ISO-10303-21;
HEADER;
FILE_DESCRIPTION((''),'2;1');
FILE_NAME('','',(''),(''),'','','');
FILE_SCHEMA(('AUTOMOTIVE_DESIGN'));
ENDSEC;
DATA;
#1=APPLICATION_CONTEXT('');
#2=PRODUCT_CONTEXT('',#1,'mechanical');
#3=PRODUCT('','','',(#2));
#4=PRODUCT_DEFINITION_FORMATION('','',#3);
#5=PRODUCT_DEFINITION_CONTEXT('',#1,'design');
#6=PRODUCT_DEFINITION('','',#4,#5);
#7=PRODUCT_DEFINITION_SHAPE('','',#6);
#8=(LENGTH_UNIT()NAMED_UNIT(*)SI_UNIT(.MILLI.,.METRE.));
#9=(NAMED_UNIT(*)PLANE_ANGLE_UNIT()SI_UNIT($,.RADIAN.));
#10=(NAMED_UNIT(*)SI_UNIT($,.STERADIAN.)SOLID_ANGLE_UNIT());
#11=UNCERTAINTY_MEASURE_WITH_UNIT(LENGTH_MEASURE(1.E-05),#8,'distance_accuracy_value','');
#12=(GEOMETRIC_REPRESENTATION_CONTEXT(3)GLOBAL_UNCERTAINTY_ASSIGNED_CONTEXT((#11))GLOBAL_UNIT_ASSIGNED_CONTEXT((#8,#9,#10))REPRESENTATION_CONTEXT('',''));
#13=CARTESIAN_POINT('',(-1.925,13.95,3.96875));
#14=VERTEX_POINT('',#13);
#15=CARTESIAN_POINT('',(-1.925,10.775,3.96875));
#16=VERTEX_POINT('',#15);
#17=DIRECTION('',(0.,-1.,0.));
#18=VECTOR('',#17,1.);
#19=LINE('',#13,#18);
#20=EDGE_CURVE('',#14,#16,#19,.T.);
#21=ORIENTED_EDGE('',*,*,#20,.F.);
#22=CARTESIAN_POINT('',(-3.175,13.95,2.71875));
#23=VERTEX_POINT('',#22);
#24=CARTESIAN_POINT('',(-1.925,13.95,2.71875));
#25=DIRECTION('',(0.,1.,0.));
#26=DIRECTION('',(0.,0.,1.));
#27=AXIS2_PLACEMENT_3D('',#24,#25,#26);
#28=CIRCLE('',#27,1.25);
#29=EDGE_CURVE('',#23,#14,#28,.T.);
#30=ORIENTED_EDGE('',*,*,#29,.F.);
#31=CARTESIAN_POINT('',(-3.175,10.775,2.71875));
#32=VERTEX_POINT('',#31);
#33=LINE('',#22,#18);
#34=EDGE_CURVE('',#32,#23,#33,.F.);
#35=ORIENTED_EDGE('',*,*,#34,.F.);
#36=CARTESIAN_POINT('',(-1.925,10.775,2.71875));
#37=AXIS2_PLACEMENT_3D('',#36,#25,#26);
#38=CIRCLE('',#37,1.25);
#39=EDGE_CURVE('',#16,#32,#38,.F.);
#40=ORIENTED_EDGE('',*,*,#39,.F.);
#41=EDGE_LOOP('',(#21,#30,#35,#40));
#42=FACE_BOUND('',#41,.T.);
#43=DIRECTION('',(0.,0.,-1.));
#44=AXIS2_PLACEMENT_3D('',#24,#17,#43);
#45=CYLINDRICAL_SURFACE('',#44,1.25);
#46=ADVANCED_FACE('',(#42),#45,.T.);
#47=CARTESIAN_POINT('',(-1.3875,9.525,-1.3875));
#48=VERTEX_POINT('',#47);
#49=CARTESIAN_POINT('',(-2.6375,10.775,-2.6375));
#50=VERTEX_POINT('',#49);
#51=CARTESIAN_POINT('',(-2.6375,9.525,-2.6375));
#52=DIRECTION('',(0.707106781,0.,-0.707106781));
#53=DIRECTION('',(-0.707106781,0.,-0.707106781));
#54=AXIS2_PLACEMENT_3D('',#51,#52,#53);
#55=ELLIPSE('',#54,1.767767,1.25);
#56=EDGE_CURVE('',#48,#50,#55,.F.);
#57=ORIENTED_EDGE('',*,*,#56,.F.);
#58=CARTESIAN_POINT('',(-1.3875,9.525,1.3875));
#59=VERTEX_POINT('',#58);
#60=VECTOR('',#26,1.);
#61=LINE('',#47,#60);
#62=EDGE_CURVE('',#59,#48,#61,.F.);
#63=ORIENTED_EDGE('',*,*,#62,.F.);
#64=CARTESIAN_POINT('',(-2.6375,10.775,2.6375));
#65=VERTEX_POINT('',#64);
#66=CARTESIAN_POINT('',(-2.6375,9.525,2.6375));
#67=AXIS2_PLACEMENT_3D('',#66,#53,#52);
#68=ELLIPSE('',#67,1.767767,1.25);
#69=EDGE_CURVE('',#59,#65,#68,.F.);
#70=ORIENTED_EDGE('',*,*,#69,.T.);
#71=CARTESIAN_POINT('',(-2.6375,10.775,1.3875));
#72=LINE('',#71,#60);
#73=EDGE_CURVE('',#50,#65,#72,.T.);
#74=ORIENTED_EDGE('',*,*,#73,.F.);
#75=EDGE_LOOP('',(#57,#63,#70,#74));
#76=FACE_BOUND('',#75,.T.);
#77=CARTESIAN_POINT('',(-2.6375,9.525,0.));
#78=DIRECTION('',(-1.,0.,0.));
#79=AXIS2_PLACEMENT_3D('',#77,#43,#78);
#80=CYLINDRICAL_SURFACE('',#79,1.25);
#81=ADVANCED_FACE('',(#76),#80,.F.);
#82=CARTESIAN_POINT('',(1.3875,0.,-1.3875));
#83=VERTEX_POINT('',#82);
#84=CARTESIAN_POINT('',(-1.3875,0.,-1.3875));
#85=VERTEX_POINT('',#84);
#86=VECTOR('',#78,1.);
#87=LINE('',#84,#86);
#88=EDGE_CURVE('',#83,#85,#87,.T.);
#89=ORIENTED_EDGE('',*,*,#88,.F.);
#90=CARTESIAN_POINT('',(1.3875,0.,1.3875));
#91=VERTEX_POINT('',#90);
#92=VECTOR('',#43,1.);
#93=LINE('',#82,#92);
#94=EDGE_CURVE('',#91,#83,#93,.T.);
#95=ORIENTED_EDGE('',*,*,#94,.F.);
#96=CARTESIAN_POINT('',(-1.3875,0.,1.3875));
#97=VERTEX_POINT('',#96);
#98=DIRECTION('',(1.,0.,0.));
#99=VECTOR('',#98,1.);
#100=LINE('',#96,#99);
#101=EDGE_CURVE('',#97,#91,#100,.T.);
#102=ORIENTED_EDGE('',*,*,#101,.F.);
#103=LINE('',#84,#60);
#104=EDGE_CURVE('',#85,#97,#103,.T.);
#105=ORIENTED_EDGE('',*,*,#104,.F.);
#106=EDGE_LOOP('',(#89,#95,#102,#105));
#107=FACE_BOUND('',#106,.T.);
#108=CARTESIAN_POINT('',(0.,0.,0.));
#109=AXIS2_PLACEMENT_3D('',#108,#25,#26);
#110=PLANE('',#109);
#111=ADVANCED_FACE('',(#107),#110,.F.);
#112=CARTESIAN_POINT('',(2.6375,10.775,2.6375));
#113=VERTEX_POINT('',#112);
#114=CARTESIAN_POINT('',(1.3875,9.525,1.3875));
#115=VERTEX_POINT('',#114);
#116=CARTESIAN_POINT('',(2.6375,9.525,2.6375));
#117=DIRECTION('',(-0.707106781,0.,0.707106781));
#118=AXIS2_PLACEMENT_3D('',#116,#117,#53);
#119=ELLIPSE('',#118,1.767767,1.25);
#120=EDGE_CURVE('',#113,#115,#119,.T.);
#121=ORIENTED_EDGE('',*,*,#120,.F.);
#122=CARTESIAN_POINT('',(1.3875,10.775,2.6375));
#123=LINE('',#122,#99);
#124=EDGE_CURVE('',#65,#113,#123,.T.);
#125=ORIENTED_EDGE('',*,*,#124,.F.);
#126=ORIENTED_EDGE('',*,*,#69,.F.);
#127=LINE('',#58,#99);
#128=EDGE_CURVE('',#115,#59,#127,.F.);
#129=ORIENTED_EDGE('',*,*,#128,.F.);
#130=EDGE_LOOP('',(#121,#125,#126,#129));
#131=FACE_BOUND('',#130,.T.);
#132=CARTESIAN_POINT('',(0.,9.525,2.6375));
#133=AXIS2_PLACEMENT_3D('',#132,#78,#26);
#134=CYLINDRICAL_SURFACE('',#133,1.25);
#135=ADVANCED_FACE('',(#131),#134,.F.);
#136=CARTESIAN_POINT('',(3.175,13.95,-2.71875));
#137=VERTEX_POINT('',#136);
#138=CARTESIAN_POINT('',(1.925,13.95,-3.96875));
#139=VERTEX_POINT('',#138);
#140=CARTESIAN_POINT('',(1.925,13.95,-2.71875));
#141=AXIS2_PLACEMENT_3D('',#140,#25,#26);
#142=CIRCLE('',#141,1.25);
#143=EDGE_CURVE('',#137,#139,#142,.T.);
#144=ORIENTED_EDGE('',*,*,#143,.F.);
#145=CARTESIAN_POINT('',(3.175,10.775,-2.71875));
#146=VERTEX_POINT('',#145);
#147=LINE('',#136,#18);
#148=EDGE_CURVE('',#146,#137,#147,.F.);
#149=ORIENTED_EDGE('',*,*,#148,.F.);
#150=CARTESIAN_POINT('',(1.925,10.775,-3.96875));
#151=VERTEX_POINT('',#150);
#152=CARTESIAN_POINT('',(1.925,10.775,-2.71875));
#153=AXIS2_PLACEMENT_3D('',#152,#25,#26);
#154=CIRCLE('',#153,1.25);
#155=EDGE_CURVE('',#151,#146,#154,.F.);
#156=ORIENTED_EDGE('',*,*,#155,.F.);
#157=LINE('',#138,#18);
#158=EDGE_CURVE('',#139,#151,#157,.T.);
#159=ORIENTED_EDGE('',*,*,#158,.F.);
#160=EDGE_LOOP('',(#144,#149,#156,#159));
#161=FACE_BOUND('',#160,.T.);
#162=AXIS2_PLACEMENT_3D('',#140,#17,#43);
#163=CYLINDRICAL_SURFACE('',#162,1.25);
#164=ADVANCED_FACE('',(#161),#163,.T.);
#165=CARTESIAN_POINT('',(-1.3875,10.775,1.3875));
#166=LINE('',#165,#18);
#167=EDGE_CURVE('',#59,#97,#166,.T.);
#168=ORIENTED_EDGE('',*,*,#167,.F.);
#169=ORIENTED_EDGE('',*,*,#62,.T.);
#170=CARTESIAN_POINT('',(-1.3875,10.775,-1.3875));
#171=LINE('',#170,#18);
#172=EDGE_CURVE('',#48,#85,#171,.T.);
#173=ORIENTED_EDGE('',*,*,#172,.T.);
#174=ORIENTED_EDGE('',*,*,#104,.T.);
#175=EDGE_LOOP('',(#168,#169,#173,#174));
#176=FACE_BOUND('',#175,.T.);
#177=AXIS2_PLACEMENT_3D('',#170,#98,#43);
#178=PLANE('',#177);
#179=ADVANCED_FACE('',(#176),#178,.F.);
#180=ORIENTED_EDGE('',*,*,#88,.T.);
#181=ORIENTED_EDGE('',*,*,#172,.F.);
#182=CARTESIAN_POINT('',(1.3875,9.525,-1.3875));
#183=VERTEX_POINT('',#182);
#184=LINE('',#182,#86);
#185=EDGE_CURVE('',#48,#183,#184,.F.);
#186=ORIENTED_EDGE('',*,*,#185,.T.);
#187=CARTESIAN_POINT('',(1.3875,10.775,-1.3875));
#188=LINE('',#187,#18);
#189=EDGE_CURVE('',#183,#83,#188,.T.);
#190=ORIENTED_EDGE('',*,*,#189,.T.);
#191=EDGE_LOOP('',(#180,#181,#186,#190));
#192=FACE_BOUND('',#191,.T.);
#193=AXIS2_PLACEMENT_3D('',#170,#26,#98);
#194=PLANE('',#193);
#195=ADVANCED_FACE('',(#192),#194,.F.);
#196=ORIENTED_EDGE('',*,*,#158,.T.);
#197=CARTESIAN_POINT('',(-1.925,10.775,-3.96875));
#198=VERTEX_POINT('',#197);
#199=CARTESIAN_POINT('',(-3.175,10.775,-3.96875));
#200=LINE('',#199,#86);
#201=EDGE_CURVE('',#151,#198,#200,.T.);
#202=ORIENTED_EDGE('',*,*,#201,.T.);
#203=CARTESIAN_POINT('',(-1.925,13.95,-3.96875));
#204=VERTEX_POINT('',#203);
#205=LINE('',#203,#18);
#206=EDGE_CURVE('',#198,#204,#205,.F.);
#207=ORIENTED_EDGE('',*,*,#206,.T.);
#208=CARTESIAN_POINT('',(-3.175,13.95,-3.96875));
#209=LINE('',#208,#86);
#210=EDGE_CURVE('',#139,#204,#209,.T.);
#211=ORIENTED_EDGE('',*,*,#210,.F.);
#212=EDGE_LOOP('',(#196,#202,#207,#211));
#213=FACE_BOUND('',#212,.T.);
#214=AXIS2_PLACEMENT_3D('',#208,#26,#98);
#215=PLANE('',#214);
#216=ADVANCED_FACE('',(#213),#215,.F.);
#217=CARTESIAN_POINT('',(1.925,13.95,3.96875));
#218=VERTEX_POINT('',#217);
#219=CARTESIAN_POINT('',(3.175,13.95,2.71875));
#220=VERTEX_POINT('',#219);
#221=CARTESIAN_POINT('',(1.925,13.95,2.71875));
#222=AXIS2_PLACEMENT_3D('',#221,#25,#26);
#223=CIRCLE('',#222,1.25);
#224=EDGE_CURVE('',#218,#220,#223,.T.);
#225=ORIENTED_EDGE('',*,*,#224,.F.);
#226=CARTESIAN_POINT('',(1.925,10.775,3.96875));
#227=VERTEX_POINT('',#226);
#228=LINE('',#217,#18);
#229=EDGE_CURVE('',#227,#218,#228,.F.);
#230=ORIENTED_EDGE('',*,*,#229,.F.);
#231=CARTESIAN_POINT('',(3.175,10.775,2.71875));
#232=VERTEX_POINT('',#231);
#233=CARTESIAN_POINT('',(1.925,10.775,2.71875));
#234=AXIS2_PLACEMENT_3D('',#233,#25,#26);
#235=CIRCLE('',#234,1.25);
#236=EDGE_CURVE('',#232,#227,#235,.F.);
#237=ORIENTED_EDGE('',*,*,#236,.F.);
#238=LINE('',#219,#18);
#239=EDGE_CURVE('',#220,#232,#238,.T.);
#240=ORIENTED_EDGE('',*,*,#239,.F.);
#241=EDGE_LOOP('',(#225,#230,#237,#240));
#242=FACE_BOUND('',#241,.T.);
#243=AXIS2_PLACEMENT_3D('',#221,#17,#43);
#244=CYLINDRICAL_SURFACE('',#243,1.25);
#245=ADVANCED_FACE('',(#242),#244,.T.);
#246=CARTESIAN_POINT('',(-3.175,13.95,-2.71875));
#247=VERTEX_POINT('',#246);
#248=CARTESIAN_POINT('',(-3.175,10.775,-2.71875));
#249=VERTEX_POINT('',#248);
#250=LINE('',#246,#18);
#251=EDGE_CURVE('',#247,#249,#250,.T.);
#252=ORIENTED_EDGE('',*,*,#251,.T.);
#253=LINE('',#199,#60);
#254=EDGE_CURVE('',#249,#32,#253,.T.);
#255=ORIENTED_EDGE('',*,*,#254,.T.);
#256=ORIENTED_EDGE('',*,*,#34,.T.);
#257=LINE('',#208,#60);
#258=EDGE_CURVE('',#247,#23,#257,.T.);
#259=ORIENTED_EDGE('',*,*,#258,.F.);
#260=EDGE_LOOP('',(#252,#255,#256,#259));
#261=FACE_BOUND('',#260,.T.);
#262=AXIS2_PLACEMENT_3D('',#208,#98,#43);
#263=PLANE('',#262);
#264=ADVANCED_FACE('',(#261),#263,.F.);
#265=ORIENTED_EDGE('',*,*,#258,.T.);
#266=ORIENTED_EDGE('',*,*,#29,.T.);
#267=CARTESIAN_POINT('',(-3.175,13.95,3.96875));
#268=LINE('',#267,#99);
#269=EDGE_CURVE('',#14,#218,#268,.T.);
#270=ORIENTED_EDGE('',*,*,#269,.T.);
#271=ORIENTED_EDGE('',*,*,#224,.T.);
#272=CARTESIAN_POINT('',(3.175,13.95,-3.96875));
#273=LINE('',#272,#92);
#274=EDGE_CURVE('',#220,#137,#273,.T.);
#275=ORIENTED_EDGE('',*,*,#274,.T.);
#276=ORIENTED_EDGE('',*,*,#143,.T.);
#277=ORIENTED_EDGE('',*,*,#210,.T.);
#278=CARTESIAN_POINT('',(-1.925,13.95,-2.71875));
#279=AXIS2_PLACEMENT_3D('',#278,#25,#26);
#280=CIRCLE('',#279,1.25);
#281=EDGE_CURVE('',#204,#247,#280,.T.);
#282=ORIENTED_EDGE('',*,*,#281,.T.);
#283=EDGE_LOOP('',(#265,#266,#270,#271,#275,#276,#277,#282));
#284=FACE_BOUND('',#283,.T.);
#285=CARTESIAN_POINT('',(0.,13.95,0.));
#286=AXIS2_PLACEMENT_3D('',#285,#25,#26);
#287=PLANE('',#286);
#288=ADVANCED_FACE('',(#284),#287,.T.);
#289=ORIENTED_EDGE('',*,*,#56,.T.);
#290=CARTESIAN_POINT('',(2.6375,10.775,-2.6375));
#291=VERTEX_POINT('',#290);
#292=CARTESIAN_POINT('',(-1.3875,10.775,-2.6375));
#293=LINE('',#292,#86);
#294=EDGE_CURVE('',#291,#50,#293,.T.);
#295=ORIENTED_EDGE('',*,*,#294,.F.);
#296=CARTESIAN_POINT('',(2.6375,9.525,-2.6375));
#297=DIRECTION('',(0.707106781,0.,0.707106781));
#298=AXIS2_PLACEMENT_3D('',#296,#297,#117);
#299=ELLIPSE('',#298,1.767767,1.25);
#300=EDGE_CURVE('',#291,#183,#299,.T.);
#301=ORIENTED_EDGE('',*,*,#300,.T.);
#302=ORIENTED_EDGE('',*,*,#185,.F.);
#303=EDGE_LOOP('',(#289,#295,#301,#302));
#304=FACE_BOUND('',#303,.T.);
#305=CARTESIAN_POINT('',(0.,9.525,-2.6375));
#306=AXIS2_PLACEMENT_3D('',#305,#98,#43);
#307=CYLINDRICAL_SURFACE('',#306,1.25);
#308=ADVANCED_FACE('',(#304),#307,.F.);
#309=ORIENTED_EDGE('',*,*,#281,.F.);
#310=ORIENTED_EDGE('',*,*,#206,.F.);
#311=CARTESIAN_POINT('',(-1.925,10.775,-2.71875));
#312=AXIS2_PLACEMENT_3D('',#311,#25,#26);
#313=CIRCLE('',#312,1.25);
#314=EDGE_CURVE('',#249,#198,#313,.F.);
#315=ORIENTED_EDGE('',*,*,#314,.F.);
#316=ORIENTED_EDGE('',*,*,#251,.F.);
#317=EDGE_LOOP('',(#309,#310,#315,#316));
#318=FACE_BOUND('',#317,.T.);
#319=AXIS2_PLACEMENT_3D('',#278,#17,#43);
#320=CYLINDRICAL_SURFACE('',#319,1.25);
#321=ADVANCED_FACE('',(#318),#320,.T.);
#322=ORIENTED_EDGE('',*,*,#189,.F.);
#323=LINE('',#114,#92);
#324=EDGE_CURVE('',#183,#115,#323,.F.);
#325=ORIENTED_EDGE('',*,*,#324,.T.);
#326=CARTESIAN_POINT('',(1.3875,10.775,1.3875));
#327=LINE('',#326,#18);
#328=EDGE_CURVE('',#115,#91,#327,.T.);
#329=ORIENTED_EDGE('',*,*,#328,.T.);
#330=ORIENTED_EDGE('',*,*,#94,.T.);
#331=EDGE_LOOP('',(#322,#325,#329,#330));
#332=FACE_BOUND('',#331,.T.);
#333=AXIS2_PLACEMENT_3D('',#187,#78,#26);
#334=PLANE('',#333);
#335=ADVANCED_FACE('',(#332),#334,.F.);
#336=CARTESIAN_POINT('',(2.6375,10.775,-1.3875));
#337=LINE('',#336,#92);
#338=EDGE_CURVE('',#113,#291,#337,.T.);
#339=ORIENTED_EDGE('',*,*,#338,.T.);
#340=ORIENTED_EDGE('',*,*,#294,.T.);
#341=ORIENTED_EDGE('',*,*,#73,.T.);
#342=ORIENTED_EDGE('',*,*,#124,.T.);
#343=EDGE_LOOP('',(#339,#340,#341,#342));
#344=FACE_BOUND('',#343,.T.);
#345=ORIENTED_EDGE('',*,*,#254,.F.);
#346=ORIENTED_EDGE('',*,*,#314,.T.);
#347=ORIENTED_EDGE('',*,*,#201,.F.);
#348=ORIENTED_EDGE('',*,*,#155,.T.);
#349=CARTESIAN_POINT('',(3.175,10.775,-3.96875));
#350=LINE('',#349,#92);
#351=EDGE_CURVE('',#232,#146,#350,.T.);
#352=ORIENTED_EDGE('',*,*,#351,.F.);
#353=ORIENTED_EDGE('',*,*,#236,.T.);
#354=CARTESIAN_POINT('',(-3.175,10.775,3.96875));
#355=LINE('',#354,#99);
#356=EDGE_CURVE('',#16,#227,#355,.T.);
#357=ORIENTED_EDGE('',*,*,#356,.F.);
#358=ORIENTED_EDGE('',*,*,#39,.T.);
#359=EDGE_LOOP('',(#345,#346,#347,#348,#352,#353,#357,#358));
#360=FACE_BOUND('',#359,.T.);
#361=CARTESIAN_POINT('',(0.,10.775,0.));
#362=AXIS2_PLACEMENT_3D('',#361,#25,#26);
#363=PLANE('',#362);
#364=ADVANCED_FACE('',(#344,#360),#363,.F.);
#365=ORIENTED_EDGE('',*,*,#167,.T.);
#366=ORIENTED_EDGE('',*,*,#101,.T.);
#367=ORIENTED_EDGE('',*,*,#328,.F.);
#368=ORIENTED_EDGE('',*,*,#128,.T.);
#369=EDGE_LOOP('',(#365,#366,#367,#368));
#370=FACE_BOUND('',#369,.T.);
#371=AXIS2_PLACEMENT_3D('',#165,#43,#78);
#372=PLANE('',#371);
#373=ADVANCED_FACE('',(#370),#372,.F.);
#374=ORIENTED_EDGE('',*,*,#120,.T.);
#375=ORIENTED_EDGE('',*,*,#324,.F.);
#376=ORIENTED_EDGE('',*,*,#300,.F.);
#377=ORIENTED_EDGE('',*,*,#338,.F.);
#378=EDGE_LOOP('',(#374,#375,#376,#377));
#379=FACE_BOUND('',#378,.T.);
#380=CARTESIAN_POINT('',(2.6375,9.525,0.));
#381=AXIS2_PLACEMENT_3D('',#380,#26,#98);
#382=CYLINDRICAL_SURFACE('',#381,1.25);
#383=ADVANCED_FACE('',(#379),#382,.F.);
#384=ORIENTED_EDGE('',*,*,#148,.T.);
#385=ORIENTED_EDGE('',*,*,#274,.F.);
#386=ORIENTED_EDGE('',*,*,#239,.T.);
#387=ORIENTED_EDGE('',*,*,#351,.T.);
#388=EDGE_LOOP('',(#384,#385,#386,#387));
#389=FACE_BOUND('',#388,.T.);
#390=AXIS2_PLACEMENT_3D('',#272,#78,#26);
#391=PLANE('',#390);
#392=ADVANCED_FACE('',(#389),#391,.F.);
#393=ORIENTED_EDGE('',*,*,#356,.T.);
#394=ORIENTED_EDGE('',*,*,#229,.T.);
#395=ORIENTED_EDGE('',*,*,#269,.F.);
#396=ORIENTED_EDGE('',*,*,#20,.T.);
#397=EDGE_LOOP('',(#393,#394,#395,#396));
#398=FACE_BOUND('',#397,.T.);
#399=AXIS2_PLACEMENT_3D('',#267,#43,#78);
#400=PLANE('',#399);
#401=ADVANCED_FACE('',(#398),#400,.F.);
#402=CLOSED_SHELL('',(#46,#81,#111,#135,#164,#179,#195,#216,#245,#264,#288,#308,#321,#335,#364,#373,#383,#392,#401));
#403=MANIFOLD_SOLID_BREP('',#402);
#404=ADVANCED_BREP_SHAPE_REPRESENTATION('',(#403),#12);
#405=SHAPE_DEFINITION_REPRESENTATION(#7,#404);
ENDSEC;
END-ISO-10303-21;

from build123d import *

# Parameters (mm, degrees)
SKETCH1_W           = 2.775
SKETCH1_H           = 2.775
BOSS_EXTRUDE1_DEPTH = 10.775
SKETCH2_W           = 6.35
SKETCH2_H           = 7.9375
BOSS_EXTRUDE2_DEPTH = 3.175
FILLET1_R           = 1.25


with BuildPart() as part:
    # Sketch1 → Boss-Extrude1 (new body)
    with BuildSketch(Plane(origin=(0, 0, 0), x_dir=(1, 0, 0), z_dir=(0, 1, 0))):
        Rectangle(SKETCH1_W, SKETCH1_H)
    extrude(amount=BOSS_EXTRUDE1_DEPTH)

    # Sketch2 → Boss-Extrude2 (add)
    with BuildSketch(Plane(origin=(0, 10.775, 0), x_dir=(1, 0, 0), z_dir=(0, 1, 0))):
        Rectangle(SKETCH2_W, SKETCH2_H)
    extrude(amount=BOSS_EXTRUDE2_DEPTH)

    # Fillet1
    fillet1_edges = [part.edges().sort_by_distance(p)[0] for p in [
        (0, 10.775, -1.3875),
        (1.3875, 10.775, 0),
        (0, 10.775, 1.3875),
        (-1.3875, 10.775, 0),
        (-3.175, 12.3625, -3.96875),
        (3.175, 12.3625, -3.96875),
        (-3.175, 12.3625, 3.96875),
        (3.175, 12.3625, 3.96875),
    ]]
    fillet(fillet1_edges, radius=FILLET1_R)


solid = part.part
